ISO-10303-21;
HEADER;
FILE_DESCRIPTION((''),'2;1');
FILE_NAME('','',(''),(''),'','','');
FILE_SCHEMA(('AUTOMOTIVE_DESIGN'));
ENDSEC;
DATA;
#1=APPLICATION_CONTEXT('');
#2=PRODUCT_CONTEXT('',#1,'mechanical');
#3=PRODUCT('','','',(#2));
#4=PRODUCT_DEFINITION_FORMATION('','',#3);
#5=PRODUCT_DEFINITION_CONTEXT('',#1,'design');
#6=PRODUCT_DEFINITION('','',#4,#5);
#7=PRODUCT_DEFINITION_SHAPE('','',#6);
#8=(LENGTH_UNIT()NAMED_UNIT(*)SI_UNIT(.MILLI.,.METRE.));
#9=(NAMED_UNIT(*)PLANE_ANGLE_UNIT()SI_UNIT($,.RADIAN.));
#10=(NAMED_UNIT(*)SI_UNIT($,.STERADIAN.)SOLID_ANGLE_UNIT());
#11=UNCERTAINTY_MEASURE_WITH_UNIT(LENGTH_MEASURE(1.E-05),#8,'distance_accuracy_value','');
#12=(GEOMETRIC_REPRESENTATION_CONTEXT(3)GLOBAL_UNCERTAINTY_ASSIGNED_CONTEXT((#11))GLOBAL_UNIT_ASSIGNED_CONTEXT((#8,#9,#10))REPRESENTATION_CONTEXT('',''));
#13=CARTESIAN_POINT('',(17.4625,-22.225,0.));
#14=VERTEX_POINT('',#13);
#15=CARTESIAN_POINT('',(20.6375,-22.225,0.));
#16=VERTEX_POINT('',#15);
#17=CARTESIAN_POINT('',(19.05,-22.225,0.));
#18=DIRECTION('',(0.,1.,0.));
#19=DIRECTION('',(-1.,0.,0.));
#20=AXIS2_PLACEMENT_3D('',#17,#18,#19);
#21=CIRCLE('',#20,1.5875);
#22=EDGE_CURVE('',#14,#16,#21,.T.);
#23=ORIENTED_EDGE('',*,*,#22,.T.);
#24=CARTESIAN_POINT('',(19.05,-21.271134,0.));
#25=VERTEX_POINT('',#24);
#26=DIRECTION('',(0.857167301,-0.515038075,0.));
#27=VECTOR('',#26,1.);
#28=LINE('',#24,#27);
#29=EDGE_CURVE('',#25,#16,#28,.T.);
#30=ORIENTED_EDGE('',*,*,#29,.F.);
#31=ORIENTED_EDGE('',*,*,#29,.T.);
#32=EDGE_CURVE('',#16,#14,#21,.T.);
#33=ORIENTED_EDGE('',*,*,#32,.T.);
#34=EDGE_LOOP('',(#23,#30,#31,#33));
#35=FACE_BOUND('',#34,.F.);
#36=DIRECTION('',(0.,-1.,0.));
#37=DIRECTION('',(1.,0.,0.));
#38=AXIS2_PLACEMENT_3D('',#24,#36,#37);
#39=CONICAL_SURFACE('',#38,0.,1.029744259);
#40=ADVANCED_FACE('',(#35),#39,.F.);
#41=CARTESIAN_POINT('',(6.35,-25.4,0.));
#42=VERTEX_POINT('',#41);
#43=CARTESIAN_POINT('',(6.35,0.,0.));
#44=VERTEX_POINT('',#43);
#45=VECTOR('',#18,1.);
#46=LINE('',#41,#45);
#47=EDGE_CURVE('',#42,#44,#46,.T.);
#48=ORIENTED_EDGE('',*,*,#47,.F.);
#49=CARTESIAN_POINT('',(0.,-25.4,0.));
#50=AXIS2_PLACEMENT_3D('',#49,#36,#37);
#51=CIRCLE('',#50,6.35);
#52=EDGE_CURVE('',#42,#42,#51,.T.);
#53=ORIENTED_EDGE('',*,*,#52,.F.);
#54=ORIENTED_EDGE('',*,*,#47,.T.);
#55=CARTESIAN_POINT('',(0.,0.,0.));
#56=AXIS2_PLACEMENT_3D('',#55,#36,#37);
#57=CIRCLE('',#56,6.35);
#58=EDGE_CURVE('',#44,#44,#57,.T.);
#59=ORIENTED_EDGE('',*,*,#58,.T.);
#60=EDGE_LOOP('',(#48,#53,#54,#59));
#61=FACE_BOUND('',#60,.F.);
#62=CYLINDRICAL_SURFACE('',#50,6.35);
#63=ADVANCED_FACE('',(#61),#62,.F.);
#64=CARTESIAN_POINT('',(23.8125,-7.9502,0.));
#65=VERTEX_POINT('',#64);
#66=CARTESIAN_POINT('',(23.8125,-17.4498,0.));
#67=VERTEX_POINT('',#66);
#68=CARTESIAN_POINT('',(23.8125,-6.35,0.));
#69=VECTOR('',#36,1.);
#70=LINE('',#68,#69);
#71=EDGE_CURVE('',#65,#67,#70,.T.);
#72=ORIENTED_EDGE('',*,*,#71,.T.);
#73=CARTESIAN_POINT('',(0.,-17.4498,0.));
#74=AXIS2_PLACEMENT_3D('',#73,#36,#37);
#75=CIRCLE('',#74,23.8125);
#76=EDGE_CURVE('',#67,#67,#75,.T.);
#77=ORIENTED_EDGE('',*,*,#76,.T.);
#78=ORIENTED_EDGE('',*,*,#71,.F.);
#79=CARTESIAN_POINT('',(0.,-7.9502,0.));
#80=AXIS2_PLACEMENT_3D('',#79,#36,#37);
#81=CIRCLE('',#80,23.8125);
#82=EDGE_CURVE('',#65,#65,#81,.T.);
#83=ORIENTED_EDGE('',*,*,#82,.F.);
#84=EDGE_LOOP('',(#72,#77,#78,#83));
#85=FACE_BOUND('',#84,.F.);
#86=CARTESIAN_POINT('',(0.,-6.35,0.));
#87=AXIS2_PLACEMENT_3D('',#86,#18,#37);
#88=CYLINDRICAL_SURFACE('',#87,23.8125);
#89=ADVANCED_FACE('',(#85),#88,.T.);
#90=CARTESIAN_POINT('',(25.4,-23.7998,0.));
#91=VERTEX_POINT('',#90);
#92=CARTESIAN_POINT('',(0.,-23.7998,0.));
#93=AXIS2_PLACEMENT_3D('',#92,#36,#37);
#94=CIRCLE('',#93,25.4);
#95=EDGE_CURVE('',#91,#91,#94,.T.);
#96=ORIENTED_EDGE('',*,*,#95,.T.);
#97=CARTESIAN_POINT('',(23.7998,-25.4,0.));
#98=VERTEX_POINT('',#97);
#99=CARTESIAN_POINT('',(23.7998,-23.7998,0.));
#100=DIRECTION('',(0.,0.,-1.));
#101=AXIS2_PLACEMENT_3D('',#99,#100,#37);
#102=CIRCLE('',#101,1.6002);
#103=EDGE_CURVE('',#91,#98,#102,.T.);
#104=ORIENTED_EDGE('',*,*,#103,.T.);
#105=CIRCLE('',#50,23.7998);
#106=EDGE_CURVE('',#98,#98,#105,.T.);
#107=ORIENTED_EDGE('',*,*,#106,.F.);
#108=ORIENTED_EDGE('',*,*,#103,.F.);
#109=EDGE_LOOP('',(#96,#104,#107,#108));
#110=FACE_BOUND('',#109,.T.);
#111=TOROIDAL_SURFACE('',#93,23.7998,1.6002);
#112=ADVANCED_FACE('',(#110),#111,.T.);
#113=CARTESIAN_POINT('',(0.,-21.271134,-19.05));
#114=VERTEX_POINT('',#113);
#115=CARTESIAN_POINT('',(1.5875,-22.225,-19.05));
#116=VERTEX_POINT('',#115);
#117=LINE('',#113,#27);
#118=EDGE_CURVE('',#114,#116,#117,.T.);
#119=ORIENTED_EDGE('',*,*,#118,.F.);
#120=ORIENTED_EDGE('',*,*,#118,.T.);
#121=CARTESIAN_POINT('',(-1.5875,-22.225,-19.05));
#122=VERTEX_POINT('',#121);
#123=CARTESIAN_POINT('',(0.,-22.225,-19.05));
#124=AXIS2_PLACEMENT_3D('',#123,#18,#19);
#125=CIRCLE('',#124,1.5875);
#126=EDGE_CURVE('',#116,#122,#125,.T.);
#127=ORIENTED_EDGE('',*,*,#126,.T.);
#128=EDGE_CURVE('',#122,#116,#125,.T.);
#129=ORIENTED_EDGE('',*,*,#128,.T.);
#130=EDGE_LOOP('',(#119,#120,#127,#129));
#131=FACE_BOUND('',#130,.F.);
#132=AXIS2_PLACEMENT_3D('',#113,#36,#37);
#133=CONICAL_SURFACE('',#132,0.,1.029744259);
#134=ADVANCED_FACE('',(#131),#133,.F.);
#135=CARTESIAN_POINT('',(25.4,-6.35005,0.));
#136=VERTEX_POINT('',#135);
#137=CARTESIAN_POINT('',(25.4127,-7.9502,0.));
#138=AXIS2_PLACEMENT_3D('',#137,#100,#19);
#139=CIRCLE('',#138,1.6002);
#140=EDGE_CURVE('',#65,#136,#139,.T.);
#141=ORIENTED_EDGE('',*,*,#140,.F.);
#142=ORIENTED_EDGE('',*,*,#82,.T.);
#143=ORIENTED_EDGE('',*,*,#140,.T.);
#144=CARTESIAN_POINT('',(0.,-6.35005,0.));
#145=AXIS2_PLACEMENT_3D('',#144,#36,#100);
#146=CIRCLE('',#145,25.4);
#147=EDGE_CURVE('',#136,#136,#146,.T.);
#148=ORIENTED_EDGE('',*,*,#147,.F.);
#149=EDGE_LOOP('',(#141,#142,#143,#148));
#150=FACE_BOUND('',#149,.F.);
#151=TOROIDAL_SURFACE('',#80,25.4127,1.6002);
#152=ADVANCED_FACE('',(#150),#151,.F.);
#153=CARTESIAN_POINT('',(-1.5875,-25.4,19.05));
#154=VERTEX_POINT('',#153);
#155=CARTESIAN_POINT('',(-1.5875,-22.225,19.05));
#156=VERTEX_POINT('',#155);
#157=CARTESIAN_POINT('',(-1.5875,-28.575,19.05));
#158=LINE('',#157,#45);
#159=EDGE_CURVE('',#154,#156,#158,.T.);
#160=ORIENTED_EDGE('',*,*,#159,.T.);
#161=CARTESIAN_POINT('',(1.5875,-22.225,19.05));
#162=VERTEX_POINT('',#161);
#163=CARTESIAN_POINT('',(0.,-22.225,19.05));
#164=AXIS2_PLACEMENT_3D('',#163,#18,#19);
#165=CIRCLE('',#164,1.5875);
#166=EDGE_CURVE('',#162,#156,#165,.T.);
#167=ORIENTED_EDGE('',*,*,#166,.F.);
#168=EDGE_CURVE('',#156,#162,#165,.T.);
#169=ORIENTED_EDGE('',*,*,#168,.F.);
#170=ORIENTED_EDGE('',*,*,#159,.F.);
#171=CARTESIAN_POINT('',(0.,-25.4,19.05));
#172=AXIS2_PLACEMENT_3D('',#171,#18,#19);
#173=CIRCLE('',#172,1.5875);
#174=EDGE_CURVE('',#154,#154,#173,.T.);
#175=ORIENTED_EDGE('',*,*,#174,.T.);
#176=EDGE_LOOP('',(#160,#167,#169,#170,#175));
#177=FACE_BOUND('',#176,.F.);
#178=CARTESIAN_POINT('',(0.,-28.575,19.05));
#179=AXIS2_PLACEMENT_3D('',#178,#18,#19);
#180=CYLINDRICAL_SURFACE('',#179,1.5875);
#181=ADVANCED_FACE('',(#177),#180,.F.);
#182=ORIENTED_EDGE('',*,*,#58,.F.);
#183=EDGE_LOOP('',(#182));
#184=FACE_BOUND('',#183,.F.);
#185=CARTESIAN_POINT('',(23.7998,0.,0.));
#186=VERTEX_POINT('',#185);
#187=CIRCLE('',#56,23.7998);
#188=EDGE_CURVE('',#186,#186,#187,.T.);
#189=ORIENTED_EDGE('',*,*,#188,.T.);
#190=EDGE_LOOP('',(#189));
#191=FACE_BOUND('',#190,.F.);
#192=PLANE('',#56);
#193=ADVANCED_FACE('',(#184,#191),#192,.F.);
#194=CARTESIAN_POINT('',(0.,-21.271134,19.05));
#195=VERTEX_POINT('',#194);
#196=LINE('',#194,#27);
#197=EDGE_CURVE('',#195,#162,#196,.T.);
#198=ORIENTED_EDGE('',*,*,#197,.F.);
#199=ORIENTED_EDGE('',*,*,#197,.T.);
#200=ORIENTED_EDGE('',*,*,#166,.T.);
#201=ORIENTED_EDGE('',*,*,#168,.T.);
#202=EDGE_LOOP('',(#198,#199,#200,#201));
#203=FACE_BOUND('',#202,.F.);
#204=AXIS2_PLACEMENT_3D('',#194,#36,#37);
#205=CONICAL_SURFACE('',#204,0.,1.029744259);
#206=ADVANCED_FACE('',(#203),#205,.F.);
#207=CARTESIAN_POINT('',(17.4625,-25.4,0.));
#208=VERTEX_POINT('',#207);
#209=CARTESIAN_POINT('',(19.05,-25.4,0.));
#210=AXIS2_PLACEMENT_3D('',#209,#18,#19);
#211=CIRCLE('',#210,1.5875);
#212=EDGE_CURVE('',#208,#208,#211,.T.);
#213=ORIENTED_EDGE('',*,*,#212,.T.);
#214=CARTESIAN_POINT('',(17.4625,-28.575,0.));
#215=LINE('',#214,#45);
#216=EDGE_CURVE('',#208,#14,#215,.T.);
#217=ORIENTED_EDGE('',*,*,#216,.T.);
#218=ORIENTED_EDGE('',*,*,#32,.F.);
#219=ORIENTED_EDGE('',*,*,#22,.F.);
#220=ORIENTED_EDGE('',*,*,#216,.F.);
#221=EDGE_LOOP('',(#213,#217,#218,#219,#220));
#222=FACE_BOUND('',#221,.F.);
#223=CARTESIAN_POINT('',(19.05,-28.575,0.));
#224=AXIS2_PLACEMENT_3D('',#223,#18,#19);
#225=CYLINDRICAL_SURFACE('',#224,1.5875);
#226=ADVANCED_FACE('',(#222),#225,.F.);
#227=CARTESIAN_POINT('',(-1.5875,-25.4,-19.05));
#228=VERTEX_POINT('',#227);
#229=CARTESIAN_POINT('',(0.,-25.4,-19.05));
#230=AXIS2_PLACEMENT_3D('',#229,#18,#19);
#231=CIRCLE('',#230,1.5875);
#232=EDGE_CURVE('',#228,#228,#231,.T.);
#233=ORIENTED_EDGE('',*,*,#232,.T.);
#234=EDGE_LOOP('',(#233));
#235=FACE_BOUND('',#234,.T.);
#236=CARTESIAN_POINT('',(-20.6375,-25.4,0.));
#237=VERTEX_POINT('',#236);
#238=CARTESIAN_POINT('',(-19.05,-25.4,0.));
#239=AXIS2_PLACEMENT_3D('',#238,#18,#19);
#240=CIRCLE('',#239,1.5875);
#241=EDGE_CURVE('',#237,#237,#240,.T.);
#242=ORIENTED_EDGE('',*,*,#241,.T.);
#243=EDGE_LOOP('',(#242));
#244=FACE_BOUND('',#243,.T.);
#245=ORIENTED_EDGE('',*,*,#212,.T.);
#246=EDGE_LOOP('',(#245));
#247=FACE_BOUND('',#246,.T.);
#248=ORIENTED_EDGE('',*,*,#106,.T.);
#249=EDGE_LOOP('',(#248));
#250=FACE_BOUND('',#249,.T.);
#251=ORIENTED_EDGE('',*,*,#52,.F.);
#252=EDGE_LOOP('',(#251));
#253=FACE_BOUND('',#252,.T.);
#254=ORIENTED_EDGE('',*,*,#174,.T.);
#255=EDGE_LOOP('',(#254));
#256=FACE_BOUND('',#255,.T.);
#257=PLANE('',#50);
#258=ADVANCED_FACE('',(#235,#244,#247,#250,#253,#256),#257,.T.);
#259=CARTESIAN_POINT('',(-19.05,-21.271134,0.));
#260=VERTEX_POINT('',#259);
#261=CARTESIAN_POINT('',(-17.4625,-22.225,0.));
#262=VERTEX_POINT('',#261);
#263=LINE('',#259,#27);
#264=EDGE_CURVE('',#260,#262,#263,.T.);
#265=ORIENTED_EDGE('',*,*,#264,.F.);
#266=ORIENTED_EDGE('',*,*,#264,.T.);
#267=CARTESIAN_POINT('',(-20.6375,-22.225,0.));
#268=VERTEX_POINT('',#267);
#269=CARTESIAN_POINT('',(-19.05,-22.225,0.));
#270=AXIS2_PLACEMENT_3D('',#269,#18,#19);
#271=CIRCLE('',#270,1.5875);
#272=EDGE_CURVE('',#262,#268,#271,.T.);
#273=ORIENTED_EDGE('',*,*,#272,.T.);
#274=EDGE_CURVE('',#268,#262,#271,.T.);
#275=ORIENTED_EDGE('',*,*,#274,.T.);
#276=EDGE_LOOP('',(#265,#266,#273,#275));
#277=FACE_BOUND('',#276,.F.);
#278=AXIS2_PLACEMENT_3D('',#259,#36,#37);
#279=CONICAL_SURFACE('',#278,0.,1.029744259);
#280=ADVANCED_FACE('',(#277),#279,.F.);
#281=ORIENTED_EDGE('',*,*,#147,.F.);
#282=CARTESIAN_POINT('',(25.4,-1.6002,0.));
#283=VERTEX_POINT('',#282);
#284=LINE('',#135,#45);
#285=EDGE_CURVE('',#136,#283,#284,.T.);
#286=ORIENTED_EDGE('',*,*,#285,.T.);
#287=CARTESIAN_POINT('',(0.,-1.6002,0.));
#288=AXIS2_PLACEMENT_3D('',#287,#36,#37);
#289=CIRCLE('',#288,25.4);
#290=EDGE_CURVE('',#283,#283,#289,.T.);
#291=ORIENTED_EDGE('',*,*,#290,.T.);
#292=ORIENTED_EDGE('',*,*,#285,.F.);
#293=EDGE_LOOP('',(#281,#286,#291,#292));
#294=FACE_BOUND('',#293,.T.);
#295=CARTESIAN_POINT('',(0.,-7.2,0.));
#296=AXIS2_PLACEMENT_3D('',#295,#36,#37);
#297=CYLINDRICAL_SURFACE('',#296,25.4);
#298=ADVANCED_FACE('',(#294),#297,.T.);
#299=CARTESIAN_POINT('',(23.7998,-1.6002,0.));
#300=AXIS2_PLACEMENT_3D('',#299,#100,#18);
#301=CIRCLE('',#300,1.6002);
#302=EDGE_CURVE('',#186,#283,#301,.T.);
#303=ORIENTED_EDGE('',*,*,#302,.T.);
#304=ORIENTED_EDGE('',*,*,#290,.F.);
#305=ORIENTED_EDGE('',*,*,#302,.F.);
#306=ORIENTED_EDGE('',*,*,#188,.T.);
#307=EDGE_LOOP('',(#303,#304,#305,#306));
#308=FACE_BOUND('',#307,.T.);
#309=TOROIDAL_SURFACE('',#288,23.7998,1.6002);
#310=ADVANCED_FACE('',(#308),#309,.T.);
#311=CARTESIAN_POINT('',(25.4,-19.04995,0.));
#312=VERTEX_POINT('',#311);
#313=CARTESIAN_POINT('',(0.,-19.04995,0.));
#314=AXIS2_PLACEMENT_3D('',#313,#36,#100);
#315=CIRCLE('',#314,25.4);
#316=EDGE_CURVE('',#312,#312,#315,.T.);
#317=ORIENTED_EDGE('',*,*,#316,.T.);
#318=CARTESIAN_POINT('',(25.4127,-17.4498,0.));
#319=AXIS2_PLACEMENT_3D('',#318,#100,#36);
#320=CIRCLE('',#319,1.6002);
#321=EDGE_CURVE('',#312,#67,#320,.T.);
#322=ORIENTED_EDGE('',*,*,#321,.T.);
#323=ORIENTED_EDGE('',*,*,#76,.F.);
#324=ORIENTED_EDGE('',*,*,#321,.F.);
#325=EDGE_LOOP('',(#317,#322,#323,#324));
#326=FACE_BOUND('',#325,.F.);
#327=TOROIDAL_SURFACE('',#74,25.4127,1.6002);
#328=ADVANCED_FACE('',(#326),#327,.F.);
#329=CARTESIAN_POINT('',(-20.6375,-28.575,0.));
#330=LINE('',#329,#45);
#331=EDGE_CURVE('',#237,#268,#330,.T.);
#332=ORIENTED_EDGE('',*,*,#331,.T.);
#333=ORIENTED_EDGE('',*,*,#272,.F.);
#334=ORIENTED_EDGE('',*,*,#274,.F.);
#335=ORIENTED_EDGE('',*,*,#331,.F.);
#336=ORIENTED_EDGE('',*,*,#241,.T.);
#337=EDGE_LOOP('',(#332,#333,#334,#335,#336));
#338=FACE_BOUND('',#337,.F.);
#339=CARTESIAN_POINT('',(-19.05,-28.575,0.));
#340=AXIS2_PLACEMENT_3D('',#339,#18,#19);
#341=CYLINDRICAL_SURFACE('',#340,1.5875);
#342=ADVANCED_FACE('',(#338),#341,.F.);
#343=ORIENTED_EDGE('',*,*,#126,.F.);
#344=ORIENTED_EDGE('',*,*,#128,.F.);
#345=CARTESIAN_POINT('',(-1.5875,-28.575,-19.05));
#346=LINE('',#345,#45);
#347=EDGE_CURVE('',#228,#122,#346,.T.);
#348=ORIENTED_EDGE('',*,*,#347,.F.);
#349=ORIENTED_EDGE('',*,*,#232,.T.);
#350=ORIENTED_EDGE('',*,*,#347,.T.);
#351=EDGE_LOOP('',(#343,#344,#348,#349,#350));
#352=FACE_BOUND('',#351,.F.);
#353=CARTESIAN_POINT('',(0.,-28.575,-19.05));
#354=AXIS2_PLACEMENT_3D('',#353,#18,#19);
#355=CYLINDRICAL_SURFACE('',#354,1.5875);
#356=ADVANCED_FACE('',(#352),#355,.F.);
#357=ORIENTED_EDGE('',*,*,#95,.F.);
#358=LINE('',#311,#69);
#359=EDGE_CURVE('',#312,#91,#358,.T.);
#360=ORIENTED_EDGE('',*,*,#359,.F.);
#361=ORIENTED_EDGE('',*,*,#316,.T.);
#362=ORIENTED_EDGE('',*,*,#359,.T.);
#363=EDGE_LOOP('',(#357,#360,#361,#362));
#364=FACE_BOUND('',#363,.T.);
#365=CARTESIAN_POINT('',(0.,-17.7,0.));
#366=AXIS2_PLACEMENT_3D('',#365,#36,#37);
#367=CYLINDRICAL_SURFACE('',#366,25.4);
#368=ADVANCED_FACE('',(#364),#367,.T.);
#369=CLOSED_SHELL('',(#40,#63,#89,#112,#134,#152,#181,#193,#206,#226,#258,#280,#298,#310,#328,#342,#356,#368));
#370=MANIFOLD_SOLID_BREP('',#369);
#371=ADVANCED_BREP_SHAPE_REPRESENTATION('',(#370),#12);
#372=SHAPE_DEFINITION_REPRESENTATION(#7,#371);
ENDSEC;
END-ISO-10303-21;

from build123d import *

# Parameters (mm, degrees)
F0_R          = 25.4
F1_DEPTH      = 6.35
F2_R          = 23.8125
F3_DEPTH      = 12.7
F4_R          = 25.4
F5_DEPTH      = 6.35
F6_R          = 6.35
F7_DEPTH      = 25.401
F9_D          = 3.175
F9_DEPTH      = 3.175
F9_TIP        = 0.9538662327
F10_S5_R      = 25.4
F10_T6_DEPTH  = 42
F10_S11_R     = 25.4
F10_T12_DEPTH = 40


# Not quite as in the source:
# - a fillet or chamfer that OpenCascade refuses, or shapes differently, is made with other operations: its cross-section is extruded or revolved along the edge and cut away or added


with BuildPart() as f1:
    # F0 (on Front) → F1 (new body)
    with BuildSketch(Plane.XZ):
        Circle(F0_R)
    extrude(amount=F1_DEPTH)

    # F2 (on face) → F3 (join)
    with BuildSketch(Plane.XZ.offset(6.35)):
        Circle(F2_R)
    extrude(amount=F3_DEPTH)

    # F4 (on face) → F5 (join)
    with BuildSketch(Plane.XZ.offset(19.05)):
        Circle(F4_R)
    extrude(amount=F5_DEPTH)

    # F6 (on face) → F7 (cut, through all)
    with BuildSketch(Plane.XZ.offset(25.4)):
        Circle(F6_R)
    extrude(amount=-F7_DEPTH, mode=Mode.SUBTRACT)

    # F9
    with Locations(Plane.XZ.offset(25.4)):
        with Locations((0, 19.05), (0, -19.05), (-19.05, 0), (19.05, 0)):
            Hole(F9_D / 2, depth=F9_DEPTH)
            with Locations((0, 0, -(F9_DEPTH + F9_TIP / 2))):  # 118° drill point
                Cone(0, F9_D / 2, F9_TIP, mode=Mode.SUBTRACT)

    # F10: fillet of radius 1.6002 on 5 edges, made by hand


with BuildPart() as f10_tool2:
    # F10_s3 → F10_t4 (revolve)
    with BuildSketch(Plane.XY):
        with BuildLine():
            ThreePointArc((23.8125, -7.9502), (24.2811877287, -6.8186877287), (25.4127, -6.35))
            Line((25.4127, -6.35), (23.8125, -6.35))
            Line((23.8125, -6.35), (23.8125, -7.9502))
        make_face()
    revolve(axis=Axis((0, -6.35, 0), (0, -1, 0)))

    # F10_s5 → F10_t6 (intersect, symmetric)
    with BuildSketch(Plane.XZ.offset(7.2)):
        Circle(F10_S5_R)
    extrude(amount=F10_T6_DEPTH, both=True, mode=Mode.INTERSECT)


with BuildPart() as f1_1:
    add(f1.part)

    # F10_t1: union F10_tool2
    add(f10_tool2.part)


with BuildPart() as f10_tool8:
    # F10_s9 → F10_t10 (revolve)
    with BuildSketch(Plane.XY):
        with BuildLine():
            ThreePointArc((25.4127, -19.05), (24.2811877287, -18.5813122713), (23.8125, -17.4498))
            Line((23.8125, -17.4498), (23.8125, -19.05))
            Line((23.8125, -19.05), (25.4127, -19.05))
        make_face()
    revolve(axis=Axis((0, -19.05, 0), (0, -1, 0)))

    # F10_s11 → F10_t12 (intersect, symmetric)
    with BuildSketch(Plane.XZ.offset(17.7)):
        Circle(F10_S11_R)
    extrude(amount=F10_T12_DEPTH, both=True, mode=Mode.INTERSECT)


with BuildPart() as f1_2:
    add(f1_1.part)

    # F10_t7: union F10_tool8
    add(f10_tool8.part)

    # F10_s13 → F10_t14 (revolve, cut)
    with BuildSketch(Plane.XY):
        with BuildLine():
            ThreePointArc((25.4, -23.7998), (24.9313122713, -24.9313122713), (23.7998, -25.4))
            Line((23.7998, -25.4), (25.4, -25.4))
            Line((25.4, -25.4), (25.4, -23.7998))
        make_face()
    revolve(axis=Axis((0, -25.4, 0), (0, -1, 0)), mode=Mode.SUBTRACT)

    # F10_s15 → F10_t16 (revolve, cut)
    with BuildSketch(Plane.XY):
        with BuildLine():
            ThreePointArc((23.7998, 0), (24.9313122713, -0.4686877287), (25.4, -1.6002))
            Line((25.4, -1.6002), (25.4, 0))
            Line((25.4, 0), (23.7998, 0))
        make_face()
    revolve(axis=Axis((0, 0, 0), (0, -1, 0)), mode=Mode.SUBTRACT)


solid = f1_2.part
